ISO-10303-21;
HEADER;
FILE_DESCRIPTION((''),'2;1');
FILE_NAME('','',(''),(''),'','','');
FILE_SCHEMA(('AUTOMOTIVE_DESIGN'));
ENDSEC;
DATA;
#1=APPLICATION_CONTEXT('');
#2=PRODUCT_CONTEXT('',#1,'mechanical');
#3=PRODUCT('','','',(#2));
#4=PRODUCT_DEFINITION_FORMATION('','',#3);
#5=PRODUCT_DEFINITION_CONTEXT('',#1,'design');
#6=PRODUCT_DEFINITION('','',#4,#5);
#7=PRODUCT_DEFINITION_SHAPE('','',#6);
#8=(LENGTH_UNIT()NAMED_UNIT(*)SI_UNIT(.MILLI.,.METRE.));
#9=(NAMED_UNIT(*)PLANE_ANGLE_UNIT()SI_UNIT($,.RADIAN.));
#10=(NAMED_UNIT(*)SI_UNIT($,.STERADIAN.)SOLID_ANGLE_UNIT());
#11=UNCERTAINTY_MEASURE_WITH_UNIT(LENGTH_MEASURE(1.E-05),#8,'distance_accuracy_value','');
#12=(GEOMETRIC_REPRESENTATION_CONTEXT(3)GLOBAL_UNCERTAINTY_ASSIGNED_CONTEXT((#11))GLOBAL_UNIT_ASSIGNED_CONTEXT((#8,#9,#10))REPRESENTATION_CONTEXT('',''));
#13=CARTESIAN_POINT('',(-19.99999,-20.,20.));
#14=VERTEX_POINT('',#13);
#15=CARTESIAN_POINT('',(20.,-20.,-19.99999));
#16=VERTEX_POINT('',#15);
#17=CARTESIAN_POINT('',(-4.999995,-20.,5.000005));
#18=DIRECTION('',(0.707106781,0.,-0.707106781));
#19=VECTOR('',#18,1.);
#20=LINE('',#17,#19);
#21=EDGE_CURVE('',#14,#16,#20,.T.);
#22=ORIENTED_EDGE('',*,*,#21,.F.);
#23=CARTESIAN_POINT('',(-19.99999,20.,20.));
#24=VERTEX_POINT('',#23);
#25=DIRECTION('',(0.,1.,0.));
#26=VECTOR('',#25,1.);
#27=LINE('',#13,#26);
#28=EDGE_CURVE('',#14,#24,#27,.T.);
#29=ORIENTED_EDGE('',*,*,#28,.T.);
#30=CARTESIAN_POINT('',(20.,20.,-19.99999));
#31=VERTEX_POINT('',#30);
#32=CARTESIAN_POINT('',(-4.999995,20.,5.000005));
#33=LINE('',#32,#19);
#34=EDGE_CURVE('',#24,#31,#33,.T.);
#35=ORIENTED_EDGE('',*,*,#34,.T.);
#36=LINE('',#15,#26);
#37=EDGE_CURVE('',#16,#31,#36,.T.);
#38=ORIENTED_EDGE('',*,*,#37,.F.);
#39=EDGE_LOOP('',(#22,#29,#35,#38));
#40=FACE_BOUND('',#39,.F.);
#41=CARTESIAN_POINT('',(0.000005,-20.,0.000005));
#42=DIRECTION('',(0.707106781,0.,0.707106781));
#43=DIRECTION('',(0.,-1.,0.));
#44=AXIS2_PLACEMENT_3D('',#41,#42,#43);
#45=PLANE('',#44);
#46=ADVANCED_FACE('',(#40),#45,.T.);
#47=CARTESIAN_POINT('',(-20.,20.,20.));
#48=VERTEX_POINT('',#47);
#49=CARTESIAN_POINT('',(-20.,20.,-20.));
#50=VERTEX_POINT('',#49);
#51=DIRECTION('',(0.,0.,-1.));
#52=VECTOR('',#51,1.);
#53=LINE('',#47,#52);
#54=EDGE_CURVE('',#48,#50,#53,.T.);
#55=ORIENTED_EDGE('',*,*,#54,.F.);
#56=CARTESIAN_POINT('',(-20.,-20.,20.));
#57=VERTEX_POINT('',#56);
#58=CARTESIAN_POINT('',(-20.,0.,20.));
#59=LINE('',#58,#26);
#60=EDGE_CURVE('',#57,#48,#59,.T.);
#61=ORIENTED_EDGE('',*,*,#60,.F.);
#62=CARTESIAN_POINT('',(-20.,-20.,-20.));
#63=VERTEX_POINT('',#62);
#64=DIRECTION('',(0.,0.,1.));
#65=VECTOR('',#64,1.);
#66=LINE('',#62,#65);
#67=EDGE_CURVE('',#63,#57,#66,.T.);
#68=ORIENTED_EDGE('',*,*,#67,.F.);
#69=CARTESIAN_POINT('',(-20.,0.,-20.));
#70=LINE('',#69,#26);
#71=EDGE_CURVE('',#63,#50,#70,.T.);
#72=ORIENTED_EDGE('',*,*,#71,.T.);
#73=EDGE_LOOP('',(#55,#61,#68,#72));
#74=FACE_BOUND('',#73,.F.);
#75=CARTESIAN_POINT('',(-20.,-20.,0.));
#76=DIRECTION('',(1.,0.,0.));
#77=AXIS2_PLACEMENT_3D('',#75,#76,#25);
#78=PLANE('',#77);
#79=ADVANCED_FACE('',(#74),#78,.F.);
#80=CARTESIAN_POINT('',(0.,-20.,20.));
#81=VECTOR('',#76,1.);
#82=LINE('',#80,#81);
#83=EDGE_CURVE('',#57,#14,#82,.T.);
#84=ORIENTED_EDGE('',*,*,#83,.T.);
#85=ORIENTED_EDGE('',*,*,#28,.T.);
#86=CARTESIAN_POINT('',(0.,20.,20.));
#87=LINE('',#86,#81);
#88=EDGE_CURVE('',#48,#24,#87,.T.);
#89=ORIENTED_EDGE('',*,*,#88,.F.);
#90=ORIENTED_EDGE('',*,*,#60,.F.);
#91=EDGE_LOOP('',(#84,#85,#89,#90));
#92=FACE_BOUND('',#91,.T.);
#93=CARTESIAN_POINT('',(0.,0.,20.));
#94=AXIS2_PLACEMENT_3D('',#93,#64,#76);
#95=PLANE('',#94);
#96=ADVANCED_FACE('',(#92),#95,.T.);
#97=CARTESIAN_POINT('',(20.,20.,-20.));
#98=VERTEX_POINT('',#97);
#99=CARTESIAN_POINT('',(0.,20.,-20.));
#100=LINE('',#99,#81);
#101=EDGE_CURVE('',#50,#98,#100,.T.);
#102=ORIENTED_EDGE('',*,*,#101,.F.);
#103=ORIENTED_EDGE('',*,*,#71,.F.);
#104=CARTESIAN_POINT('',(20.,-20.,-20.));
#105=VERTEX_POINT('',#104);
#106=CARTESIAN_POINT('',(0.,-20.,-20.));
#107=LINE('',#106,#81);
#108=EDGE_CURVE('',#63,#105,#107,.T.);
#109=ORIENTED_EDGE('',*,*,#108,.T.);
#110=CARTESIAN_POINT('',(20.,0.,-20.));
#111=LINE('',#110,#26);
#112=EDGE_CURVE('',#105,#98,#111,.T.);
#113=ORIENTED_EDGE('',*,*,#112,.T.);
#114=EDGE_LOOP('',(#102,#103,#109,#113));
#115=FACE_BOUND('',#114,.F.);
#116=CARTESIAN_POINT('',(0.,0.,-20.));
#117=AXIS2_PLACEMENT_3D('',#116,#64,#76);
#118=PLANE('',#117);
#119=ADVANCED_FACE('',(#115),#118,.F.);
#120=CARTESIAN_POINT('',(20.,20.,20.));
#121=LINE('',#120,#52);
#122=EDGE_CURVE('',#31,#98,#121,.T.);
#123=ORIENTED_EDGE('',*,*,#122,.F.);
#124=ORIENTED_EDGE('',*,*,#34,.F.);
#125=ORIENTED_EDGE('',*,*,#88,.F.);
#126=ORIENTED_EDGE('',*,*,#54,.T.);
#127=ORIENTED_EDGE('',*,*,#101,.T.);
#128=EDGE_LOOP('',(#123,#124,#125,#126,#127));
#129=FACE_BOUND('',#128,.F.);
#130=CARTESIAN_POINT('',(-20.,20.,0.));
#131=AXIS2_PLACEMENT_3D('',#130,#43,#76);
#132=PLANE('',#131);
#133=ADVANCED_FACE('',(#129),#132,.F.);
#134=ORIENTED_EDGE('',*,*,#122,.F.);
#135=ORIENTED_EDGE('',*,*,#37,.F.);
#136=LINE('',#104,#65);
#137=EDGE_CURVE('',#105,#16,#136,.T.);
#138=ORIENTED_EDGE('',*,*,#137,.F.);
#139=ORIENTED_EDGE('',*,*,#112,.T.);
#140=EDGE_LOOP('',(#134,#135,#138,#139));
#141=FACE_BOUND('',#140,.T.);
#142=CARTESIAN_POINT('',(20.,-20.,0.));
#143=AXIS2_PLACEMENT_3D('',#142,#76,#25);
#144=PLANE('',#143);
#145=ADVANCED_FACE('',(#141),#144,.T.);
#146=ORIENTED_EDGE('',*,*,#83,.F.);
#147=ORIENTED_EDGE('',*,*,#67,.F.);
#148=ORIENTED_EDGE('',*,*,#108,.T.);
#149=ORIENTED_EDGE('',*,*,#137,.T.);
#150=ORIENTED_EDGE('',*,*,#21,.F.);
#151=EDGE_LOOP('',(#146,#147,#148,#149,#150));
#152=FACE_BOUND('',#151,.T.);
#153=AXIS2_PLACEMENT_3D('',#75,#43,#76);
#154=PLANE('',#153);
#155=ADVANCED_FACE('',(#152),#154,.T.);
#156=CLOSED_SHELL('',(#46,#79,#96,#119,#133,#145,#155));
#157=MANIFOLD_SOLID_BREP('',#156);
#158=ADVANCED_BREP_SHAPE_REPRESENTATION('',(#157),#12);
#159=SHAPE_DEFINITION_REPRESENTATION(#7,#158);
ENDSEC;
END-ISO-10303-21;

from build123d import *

# Parameters (mm, degrees)
F0_W          = 40
F0_H          = 40
F1_DEPTH      = 20
F1_DEPTH_BACK = 20
F2_SIZE       = 39.99999


# Not quite as in the source:
# - a fillet or chamfer is up to 0.001 mm smaller than in the source, because OpenCascade refuses the exact size


with BuildPart() as f1:
    # F0 (on Top) → F1 (new body, two sides)
    with BuildSketch(Plane.XY) as f1_sk:
        Rectangle(F0_W, F0_H)
    extrude(amount=F1_DEPTH)
    extrude(f1_sk.sketch, amount=-F1_DEPTH_BACK)

    # F2 (size 40 in the source; OpenCascade refuses exactly that, so slightly less here)
    f2_edges = [f1.edges().sort_by_distance(p)[0] for p in [
        (20, 0, 20),
    ]]
    chamfer(f2_edges, length=F2_SIZE)


solid = f1.part
